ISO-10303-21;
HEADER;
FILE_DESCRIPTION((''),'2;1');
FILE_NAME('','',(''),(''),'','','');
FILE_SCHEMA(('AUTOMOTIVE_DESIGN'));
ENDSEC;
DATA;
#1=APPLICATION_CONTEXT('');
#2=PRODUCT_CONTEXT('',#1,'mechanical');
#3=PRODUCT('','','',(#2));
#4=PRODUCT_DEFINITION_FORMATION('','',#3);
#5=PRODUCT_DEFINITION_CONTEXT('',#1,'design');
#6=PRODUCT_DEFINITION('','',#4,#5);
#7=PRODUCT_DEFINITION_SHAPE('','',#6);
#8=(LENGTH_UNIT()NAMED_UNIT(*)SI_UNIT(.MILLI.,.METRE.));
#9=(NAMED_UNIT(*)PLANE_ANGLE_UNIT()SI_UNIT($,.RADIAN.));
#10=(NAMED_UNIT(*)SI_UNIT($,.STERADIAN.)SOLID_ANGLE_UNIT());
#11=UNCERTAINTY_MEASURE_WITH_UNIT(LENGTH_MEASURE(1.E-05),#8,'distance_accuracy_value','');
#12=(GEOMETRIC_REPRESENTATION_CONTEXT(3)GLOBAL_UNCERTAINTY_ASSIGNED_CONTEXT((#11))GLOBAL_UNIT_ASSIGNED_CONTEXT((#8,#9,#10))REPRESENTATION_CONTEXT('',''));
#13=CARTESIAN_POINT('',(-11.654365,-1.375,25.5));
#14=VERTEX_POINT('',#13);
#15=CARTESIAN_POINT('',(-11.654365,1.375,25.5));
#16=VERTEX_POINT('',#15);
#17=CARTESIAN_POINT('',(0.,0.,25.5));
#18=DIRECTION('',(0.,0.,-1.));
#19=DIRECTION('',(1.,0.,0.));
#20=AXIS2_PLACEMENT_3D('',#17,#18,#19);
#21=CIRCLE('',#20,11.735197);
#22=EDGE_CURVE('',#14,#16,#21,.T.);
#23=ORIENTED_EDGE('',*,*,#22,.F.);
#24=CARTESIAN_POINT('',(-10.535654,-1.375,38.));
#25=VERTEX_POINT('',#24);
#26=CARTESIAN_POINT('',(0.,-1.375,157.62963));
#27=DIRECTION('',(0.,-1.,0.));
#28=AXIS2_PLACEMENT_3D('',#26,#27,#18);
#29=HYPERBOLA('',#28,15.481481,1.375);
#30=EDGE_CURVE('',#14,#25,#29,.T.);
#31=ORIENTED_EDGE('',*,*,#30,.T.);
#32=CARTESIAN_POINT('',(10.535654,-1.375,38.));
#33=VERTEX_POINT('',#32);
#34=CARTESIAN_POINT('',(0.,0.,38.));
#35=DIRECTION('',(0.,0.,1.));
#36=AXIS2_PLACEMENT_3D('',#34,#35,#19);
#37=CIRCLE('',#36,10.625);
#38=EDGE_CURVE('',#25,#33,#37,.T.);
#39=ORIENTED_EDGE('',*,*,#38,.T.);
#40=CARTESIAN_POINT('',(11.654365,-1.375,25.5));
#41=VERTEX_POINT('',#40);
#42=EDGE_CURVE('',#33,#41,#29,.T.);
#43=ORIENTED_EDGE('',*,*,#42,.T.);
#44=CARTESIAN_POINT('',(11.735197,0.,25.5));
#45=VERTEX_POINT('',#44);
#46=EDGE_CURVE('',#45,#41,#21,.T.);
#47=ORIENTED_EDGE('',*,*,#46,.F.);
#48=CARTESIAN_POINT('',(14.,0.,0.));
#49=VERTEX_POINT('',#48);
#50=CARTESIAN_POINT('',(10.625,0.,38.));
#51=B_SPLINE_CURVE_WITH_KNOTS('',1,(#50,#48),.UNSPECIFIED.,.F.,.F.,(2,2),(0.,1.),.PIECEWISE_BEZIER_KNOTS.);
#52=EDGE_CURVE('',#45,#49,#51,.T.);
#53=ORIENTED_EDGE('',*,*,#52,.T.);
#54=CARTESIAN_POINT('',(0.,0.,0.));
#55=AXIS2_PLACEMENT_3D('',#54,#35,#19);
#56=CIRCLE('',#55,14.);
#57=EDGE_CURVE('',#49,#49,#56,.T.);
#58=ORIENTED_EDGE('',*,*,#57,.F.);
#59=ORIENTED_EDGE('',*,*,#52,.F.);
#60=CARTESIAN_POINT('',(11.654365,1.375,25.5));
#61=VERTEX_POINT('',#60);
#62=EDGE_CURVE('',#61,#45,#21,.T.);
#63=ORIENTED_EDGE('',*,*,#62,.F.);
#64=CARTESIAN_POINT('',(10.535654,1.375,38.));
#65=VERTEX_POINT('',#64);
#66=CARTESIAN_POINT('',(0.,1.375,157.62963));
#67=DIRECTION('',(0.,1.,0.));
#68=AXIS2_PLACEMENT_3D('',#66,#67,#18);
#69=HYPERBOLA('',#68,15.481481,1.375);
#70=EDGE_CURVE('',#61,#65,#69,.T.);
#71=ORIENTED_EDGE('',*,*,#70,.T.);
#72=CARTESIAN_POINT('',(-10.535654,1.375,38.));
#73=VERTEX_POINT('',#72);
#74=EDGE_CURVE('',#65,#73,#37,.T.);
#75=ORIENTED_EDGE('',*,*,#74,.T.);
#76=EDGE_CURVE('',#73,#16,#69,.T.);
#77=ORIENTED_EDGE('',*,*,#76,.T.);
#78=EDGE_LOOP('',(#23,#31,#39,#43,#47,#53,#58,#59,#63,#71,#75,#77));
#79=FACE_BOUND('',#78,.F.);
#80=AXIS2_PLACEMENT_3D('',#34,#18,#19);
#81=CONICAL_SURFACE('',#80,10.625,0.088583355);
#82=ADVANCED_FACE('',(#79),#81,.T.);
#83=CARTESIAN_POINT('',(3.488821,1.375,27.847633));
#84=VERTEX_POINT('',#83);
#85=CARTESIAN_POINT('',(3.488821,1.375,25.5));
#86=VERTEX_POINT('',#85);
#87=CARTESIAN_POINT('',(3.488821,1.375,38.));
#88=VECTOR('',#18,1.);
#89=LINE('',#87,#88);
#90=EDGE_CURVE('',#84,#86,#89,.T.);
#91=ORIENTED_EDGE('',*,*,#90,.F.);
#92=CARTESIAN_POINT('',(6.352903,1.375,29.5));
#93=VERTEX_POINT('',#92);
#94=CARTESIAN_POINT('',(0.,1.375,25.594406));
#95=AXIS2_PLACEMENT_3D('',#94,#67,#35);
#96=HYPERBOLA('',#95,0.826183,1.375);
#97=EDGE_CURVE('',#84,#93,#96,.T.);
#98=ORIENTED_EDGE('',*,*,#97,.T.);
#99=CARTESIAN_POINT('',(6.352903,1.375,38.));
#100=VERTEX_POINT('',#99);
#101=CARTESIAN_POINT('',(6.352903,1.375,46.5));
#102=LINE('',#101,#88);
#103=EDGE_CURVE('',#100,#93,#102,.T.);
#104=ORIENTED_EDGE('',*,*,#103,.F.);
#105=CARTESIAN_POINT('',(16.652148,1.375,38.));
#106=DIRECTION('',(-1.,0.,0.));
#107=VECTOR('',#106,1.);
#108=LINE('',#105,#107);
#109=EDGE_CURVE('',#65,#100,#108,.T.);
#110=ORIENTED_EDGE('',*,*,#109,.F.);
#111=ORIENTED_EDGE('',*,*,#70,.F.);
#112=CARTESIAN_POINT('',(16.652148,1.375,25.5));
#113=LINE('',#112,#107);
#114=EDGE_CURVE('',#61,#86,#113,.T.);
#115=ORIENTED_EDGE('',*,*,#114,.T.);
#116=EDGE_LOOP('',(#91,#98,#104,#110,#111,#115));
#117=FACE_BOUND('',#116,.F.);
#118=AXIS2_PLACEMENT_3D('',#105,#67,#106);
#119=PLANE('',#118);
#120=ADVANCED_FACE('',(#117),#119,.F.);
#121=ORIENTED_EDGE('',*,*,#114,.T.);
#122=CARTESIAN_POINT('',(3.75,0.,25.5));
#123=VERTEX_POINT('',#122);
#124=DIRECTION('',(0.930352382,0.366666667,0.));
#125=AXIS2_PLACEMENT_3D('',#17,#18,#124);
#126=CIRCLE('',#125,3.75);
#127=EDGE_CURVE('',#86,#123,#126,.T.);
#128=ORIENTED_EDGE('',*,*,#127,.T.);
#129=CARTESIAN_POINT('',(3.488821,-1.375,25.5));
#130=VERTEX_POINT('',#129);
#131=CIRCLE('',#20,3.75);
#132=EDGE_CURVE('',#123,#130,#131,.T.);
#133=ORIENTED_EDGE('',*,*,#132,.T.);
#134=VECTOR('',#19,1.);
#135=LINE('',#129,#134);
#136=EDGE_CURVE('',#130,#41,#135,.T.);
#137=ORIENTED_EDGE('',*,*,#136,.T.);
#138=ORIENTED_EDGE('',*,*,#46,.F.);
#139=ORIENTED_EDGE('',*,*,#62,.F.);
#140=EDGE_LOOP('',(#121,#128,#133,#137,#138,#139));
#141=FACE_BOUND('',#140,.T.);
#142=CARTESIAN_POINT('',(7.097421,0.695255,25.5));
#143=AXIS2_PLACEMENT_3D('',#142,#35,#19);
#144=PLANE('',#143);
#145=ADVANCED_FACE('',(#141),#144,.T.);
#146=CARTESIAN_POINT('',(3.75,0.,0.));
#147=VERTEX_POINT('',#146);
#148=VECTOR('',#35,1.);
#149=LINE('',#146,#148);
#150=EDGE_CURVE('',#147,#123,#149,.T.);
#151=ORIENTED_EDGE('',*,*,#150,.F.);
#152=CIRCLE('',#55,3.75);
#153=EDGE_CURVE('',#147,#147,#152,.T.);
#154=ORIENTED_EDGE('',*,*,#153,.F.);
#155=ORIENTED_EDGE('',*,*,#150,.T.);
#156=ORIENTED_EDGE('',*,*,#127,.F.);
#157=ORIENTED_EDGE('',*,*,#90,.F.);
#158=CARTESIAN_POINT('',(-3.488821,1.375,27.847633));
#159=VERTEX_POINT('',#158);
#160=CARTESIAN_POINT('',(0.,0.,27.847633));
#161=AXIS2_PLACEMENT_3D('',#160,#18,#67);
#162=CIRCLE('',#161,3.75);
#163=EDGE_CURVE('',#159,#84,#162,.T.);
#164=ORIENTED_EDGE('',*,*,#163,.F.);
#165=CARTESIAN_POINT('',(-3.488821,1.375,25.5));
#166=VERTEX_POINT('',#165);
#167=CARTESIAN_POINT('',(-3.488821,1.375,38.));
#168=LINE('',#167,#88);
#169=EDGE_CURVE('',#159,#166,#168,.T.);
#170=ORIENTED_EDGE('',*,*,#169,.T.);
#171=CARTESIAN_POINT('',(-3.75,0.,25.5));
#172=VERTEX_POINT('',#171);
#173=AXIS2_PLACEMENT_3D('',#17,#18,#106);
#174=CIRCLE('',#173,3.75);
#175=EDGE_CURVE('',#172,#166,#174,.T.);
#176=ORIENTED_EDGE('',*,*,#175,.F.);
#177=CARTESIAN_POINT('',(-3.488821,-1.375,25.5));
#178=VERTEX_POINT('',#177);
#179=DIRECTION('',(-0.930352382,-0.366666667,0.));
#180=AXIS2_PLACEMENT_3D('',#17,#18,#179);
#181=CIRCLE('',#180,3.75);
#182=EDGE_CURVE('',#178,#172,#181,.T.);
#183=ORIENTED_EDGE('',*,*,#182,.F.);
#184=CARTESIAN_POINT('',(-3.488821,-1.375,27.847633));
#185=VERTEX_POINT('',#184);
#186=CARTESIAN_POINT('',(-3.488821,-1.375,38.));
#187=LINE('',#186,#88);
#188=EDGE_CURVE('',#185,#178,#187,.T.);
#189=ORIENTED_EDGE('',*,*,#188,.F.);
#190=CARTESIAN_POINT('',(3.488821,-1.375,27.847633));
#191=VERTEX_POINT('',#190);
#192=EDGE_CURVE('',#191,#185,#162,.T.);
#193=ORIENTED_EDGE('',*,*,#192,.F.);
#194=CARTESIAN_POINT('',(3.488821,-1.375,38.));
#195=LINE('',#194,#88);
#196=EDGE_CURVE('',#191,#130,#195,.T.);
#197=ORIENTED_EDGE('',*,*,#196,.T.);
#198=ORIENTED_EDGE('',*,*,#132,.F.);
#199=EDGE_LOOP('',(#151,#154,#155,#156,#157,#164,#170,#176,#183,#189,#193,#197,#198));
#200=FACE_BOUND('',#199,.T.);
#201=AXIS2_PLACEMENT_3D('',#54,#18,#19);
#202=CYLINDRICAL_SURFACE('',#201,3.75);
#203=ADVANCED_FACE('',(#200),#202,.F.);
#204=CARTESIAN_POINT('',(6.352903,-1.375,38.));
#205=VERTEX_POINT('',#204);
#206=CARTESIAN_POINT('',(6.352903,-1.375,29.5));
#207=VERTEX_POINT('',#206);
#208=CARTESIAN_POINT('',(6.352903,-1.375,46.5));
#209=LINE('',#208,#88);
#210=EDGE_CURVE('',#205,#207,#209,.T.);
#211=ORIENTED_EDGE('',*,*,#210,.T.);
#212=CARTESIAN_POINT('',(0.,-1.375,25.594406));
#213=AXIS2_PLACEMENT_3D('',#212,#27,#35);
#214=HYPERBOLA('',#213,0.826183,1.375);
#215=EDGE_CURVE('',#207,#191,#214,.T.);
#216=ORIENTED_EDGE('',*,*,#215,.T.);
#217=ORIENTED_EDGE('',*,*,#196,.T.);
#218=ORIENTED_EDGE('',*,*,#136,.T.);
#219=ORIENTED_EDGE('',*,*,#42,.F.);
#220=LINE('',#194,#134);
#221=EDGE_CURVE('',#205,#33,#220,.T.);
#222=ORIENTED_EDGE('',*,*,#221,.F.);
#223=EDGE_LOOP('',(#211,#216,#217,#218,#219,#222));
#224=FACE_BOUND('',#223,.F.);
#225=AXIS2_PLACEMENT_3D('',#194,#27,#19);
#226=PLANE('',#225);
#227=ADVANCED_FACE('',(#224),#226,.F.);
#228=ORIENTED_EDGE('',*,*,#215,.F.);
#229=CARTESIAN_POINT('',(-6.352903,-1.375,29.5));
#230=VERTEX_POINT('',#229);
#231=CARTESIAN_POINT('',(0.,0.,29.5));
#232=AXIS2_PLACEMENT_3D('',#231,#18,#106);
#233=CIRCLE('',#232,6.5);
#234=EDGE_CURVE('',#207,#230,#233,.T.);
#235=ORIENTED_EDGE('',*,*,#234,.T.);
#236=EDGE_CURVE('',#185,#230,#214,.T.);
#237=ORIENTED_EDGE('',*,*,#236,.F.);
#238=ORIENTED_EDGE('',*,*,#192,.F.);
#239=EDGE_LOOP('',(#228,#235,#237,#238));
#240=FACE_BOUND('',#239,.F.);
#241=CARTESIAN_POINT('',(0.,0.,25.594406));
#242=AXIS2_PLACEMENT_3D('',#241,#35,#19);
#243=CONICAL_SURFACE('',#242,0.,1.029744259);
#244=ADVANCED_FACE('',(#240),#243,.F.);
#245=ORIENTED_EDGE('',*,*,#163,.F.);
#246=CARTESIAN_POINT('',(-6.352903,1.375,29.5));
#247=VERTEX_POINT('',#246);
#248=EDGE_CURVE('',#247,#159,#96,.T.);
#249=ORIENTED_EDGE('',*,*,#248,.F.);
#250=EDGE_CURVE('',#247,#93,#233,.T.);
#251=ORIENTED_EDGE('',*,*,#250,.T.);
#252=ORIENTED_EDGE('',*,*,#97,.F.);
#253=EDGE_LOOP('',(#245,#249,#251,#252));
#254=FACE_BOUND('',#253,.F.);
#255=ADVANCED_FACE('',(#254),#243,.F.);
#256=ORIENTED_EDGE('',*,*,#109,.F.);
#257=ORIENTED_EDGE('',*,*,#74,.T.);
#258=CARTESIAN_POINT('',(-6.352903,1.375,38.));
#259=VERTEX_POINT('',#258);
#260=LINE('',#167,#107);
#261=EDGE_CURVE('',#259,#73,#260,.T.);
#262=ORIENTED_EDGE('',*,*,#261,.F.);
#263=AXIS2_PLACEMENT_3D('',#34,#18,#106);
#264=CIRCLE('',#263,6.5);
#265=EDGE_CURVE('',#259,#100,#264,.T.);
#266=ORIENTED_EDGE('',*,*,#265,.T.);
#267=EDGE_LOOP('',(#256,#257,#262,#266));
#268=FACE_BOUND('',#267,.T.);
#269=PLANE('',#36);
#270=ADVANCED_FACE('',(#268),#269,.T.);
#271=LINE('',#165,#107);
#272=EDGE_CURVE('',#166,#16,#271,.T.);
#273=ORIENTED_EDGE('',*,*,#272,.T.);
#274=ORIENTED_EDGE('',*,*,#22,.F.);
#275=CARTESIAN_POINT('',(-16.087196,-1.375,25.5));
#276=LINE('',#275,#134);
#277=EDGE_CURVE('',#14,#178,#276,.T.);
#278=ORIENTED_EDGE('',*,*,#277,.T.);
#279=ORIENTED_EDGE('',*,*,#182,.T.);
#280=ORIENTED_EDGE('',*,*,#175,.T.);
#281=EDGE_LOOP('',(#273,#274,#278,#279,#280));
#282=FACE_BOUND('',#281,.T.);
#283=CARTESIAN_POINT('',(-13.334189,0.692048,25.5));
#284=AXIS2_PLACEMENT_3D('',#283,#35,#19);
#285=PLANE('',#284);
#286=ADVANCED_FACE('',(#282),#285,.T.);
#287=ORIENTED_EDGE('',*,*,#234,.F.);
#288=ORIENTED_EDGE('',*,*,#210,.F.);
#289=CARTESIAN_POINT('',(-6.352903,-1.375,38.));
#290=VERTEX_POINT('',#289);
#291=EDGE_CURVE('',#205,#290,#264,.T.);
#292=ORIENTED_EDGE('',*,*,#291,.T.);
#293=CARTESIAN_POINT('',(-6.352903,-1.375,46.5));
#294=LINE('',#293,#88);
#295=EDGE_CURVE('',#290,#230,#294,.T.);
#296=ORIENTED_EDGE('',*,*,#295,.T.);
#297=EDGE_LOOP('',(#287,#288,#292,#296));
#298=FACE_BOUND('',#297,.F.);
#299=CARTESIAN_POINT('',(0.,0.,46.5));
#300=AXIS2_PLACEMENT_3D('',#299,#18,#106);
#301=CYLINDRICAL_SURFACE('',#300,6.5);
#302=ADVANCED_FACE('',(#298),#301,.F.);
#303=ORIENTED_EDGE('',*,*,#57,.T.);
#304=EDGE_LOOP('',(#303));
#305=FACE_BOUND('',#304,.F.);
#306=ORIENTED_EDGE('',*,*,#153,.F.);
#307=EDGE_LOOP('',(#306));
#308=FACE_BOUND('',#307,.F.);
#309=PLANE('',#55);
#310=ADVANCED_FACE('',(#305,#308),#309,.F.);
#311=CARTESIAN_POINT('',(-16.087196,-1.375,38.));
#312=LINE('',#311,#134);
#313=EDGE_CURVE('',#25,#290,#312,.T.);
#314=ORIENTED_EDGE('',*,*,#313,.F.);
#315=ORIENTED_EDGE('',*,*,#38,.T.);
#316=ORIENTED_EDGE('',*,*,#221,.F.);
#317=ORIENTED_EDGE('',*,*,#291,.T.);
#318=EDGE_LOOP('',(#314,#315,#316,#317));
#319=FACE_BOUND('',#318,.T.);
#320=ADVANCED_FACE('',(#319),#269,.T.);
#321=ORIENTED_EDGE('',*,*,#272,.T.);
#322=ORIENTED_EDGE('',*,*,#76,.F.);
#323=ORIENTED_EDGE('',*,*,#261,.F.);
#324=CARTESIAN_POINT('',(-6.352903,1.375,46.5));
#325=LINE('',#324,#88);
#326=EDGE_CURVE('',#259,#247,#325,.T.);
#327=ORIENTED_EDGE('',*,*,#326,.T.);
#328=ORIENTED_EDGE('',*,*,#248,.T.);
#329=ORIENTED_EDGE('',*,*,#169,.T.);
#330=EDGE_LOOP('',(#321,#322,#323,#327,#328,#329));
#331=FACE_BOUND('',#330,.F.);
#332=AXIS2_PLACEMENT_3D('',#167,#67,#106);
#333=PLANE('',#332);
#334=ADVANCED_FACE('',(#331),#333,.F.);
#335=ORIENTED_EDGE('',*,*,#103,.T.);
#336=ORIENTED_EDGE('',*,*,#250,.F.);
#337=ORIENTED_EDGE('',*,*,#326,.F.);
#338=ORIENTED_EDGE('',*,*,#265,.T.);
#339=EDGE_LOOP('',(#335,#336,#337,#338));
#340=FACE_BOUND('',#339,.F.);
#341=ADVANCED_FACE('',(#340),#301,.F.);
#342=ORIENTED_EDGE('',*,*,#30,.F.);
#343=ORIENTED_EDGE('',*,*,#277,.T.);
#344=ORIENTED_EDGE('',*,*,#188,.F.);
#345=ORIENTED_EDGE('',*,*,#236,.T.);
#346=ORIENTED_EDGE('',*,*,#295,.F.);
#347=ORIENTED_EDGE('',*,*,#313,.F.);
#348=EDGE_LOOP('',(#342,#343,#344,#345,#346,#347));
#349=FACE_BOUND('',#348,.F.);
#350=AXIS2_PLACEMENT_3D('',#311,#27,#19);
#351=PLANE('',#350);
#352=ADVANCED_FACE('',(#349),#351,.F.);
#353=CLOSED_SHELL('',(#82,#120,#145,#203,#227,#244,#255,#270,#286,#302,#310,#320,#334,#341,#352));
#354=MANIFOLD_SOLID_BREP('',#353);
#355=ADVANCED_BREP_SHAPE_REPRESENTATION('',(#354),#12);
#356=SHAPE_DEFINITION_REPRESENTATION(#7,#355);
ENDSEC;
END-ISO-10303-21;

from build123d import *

# Parameters (mm, degrees)
F2_R     = 10.625
F0_R     = 14
F4_R     = 3.75
F5_DEPTH = 61.90218
F7_DEPTH = 12.5
F9_D     = 13
F9_DEPTH = 8.5
F9_TIP   = 3.9055940237


with BuildPart() as f3:
    # F2 (on offset) → F3 section 0
    with BuildSketch(Plane.XY.offset(38)):
        Circle(F2_R)
    # F0 (on Top) → F3 section 1
    with BuildSketch(Plane.XY):
        Circle(F0_R)
    loft()

    # F4 (on Top) → F5 (cut)
    with BuildSketch(Plane.XY):
        Circle(F4_R)
    extrude(amount=F5_DEPTH, mode=Mode.SUBTRACT)

    # F6 (on face) → F7 (cut)
    with BuildSketch(Plane.XY.offset(38)):
        with BuildLine():
            Line((-10.5356537529, 1.375), (-16.0871957117, 1.375))
            Line((-16.0871957117, 1.375), (-16.0871957117, 0))
            Line((-16.0871957117, 0), (-10.625, 0))
            ThreePointArc((-10.625, 0), (-10.60263991, 0.6889498806), (-10.5356537529, 1.375))
        make_face()
        with BuildLine():
            Line((-3.4888214342, 1.375), (-10.5356537529, 1.375))
            ThreePointArc((-10.5356537529, 1.375), (-10.60263991, 0.6889498806), (-10.625, 0))
            Line((-10.625, 0), (-3.75, 0))
            ThreePointArc((-3.75, 0), (-3.6841267879, 0.6997926913), (-3.4888214342, 1.375))
        make_face()
        with BuildLine():
            Line((-10.625, 0), (-16.0871957117, 0))
            Line((-16.0871957117, 0), (-16.0871957117, -1.375))
            Line((-16.0871957117, -1.375), (-10.5356537529, -1.375))
            ThreePointArc((-10.5356537529, -1.375), (-10.60263991, -0.6889498806), (-10.625, 0))
        make_face()
        with BuildLine():
            ThreePointArc((10.625, 0), (10.60263991, 0.6889498806), (10.5356537529, 1.375))
            Line((10.5356537529, 1.375), (3.4888214342, 1.375))
            ThreePointArc((3.4888214342, 1.375), (3.6841267879, 0.6997926913), (3.75, 0))
            Line((3.75, 0), (10.625, 0))
        make_face()
        with BuildLine():
            Line((16.6521480927, 1.375), (10.5356537529, 1.375))
            ThreePointArc((10.5356537529, 1.375), (10.60263991, 0.6889498806), (10.625, 0))
            Line((10.625, 0), (16.6521480927, 0))
            Line((16.6521480927, 0), (16.6521480927, 1.375))
        make_face()
        with BuildLine():
            Line((-3.75, 0), (-10.625, 0))
            ThreePointArc((-10.625, 0), (-10.60263991, -0.6889498806), (-10.5356537529, -1.375))
            Line((-10.5356537529, -1.375), (-3.4888214342, -1.375))
            ThreePointArc((-3.4888214342, -1.375), (-3.6841267879, -0.6997926913), (-3.75, 0))
        make_face()
        with BuildLine():
            ThreePointArc((10.5356537529, -1.375), (10.60263991, -0.6889498806), (10.625, 0))
            Line((10.625, 0), (3.75, 0))
            ThreePointArc((3.75, 0), (3.6841267879, -0.6997926913), (3.4888214342, -1.375))
            Line((3.4888214342, -1.375), (10.5356537529, -1.375))
        make_face()
        with BuildLine():
            Line((16.6521480927, 0), (10.625, 0))
            ThreePointArc((10.625, 0), (10.60263991, -0.6889498806), (10.5356537529, -1.375))
            Line((10.5356537529, -1.375), (16.6521480927, -1.375))
            Line((16.6521480927, -1.375), (16.6521480927, 0))
        make_face()
    extrude(amount=-F7_DEPTH, mode=Mode.SUBTRACT)

    # F9
    with Locations(Plane.XY.offset(38)):
        with Locations((0, 0)):
            Hole(F9_D / 2, depth=F9_DEPTH)
            with Locations((0, 0, -(F9_DEPTH + F9_TIP / 2))):  # 118° drill point
                Cone(0, F9_D / 2, F9_TIP, mode=Mode.SUBTRACT)


solid = f3.part
